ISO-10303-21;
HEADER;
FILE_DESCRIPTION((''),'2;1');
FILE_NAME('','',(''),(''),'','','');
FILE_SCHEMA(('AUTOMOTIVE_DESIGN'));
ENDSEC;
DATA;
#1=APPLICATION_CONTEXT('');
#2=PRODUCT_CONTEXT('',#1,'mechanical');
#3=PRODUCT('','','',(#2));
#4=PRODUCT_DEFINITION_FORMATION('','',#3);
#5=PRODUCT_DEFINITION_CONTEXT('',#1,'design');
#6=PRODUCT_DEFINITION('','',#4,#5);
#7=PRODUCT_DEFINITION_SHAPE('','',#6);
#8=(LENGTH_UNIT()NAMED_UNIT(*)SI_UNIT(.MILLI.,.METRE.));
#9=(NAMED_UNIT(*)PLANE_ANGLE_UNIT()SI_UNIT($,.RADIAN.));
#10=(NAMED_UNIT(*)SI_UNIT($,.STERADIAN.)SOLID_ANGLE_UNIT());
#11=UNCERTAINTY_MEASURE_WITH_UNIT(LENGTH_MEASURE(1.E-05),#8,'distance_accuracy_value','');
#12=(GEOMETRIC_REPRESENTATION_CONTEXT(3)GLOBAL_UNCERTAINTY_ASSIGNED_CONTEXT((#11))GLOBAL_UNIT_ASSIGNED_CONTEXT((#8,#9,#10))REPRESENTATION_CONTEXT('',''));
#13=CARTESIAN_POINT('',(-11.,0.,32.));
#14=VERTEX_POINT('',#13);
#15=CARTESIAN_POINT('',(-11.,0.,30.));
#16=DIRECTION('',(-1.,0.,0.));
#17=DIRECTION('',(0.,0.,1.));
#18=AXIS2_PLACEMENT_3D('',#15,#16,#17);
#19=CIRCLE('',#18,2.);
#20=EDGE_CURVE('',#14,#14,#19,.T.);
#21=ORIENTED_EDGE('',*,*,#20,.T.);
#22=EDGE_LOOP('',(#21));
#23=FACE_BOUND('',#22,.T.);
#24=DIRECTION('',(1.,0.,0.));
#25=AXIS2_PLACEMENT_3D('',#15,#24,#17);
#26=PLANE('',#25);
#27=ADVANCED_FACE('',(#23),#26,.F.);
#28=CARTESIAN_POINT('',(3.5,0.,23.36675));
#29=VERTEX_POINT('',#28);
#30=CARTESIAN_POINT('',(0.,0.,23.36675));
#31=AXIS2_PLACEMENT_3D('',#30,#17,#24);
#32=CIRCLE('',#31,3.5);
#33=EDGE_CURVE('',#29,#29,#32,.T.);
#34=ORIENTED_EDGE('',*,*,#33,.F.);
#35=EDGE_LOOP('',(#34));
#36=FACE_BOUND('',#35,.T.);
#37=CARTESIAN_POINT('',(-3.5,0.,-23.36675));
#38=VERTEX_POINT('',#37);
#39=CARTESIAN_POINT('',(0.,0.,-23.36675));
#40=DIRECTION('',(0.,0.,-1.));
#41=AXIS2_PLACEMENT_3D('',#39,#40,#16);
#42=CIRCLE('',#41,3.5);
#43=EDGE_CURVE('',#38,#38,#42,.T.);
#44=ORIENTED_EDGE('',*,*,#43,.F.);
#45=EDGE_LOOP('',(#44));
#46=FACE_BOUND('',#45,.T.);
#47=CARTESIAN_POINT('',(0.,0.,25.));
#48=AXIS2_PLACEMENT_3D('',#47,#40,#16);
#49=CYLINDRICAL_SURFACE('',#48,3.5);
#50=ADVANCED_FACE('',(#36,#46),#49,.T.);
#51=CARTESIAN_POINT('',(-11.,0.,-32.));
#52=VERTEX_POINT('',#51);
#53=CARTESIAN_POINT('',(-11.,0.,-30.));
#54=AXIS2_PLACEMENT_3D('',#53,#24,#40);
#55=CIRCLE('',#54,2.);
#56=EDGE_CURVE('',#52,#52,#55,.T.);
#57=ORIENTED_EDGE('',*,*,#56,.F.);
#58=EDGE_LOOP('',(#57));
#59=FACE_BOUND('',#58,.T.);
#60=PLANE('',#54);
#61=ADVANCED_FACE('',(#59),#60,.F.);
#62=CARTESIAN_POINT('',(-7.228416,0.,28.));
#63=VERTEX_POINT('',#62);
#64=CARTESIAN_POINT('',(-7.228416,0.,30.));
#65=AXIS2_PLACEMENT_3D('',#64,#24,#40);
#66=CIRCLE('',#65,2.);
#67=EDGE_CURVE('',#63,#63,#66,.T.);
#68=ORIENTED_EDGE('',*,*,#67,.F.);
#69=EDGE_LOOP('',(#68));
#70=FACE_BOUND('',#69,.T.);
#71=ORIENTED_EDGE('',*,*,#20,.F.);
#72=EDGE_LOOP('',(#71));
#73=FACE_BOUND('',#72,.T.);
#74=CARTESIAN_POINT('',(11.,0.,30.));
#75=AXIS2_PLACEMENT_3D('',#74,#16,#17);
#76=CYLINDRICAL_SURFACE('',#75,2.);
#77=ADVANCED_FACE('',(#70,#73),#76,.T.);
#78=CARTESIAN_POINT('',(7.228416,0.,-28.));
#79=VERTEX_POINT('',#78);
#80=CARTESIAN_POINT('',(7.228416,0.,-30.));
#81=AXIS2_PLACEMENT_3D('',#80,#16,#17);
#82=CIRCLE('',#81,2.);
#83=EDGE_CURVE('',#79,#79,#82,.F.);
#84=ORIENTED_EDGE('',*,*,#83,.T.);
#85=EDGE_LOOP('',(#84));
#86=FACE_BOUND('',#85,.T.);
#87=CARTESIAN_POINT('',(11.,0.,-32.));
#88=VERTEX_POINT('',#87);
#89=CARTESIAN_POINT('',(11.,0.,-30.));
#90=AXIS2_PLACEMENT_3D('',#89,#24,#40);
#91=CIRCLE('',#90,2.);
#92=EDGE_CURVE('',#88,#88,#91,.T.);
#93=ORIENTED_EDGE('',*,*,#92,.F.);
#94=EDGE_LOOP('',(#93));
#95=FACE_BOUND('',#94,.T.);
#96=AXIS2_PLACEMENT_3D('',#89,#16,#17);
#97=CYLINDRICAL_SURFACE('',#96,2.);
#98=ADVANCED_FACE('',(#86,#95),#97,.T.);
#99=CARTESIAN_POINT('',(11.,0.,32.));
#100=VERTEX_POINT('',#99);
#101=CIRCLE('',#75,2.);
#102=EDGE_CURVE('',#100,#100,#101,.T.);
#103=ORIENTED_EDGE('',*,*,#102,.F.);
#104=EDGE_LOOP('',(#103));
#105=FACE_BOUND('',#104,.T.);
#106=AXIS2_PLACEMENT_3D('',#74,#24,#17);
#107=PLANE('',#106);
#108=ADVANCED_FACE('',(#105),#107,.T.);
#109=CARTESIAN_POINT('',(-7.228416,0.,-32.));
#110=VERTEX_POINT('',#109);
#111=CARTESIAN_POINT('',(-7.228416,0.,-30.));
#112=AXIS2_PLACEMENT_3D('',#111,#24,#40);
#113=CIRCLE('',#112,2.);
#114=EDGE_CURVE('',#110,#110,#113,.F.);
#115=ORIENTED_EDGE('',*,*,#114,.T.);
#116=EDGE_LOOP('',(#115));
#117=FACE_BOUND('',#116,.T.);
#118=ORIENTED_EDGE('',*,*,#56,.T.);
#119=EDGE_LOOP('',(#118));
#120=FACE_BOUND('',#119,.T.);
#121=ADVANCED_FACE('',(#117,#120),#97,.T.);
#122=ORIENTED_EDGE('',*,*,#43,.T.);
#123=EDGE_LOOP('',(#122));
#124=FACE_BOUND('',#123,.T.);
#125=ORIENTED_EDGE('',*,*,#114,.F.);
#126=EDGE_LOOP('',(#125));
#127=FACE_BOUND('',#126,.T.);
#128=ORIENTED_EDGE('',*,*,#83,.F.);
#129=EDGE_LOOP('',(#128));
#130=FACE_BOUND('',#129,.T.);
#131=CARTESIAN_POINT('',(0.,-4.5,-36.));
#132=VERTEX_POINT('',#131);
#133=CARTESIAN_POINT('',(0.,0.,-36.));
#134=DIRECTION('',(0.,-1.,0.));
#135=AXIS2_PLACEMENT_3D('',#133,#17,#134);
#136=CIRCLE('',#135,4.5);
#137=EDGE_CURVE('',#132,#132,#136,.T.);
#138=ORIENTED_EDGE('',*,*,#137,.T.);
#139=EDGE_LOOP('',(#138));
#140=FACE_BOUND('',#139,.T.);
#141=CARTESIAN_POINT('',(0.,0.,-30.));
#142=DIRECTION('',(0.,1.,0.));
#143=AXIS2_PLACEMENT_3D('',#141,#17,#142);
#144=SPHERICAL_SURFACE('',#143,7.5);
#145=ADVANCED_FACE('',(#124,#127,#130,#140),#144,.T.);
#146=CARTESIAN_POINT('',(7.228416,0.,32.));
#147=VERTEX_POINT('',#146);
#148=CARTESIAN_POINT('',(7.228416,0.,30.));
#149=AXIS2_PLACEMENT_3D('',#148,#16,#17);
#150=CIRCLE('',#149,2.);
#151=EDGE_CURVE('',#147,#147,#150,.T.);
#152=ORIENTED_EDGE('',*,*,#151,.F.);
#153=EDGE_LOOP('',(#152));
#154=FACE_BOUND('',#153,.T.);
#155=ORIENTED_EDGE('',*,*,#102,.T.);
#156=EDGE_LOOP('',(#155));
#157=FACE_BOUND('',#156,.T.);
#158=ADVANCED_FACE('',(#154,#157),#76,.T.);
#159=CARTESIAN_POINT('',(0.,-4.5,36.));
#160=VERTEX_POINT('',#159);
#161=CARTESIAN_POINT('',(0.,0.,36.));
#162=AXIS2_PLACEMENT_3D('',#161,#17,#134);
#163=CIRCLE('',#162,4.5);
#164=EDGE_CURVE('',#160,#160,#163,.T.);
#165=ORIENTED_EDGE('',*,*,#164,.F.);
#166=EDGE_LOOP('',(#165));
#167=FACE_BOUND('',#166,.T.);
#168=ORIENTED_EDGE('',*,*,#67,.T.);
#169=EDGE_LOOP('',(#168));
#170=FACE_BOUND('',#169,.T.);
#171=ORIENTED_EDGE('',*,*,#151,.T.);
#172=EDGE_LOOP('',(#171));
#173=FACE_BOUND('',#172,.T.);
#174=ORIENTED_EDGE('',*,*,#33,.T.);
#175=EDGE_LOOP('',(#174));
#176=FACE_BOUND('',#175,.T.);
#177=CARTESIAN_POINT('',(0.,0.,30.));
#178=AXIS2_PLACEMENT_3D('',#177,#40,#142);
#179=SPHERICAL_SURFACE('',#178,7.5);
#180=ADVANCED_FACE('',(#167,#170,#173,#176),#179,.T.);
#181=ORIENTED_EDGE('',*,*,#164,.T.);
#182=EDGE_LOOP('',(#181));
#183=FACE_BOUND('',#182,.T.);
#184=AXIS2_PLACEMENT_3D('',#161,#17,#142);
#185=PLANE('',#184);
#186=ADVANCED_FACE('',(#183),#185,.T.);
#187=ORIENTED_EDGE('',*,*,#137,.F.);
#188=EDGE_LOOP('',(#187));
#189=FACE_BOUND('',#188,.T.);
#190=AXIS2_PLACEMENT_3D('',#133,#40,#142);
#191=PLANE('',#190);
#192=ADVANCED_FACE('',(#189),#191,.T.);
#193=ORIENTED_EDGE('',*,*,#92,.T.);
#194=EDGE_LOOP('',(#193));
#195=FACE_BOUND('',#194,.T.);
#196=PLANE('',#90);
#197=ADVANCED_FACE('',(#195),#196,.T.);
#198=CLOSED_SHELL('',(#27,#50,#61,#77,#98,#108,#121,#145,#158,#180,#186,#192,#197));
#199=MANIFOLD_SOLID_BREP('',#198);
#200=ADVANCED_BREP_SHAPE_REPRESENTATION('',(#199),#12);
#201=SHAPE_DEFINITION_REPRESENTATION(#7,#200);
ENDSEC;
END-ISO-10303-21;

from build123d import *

# Parameters (mm, degrees)
SKETCH_1_R      = 3.5
EXTRUDE_1_DEPTH = 25
SKETCH_3_R      = 2
EXTRUDE_2_DEPTH = 11


with BuildPart() as part:
    # 草图1 → 凸台-拉伸1 (new, symmetric)
    with BuildSketch(Plane.XY):
        Circle(SKETCH_1_R)
    extrude(amount=EXTRUDE_1_DEPTH, both=True)

    # 草图2 → 旋转1 (revolve)
    with BuildSketch(Plane(origin=(0, 0, 0), x_dir=(0, 0, -1), z_dir=(1, 0, 0))):
        with BuildLine():
            Line((36, 0), (36, 4.5))
            ThreePointArc((36, 4.5), (27.628291755, 7.115124735), (22.5, 0))
            Line((22.5, 0), (36, 0))
        make_face()
    revolve_1 = revolve(axis=Axis((0, 0, -22.5), (0, 0, -1)))

    # 草图3 → 凸台-拉伸2 (add, symmetric)
    with BuildSketch(Plane(origin=(0, 0, 0), x_dir=(0, 0, -1), z_dir=(1, 0, 0))):
        with Locations((30, 0)):
            Circle(SKETCH_3_R)
    extrude_2 = extrude(amount=EXTRUDE_2_DEPTH, both=True)

    # 镜向1: 旋转1, 凸台-拉伸2 across plane
    add(revolve_1.mirror(Plane.XY))
    add(extrude_2.mirror(Plane.XY))


solid = part.part
